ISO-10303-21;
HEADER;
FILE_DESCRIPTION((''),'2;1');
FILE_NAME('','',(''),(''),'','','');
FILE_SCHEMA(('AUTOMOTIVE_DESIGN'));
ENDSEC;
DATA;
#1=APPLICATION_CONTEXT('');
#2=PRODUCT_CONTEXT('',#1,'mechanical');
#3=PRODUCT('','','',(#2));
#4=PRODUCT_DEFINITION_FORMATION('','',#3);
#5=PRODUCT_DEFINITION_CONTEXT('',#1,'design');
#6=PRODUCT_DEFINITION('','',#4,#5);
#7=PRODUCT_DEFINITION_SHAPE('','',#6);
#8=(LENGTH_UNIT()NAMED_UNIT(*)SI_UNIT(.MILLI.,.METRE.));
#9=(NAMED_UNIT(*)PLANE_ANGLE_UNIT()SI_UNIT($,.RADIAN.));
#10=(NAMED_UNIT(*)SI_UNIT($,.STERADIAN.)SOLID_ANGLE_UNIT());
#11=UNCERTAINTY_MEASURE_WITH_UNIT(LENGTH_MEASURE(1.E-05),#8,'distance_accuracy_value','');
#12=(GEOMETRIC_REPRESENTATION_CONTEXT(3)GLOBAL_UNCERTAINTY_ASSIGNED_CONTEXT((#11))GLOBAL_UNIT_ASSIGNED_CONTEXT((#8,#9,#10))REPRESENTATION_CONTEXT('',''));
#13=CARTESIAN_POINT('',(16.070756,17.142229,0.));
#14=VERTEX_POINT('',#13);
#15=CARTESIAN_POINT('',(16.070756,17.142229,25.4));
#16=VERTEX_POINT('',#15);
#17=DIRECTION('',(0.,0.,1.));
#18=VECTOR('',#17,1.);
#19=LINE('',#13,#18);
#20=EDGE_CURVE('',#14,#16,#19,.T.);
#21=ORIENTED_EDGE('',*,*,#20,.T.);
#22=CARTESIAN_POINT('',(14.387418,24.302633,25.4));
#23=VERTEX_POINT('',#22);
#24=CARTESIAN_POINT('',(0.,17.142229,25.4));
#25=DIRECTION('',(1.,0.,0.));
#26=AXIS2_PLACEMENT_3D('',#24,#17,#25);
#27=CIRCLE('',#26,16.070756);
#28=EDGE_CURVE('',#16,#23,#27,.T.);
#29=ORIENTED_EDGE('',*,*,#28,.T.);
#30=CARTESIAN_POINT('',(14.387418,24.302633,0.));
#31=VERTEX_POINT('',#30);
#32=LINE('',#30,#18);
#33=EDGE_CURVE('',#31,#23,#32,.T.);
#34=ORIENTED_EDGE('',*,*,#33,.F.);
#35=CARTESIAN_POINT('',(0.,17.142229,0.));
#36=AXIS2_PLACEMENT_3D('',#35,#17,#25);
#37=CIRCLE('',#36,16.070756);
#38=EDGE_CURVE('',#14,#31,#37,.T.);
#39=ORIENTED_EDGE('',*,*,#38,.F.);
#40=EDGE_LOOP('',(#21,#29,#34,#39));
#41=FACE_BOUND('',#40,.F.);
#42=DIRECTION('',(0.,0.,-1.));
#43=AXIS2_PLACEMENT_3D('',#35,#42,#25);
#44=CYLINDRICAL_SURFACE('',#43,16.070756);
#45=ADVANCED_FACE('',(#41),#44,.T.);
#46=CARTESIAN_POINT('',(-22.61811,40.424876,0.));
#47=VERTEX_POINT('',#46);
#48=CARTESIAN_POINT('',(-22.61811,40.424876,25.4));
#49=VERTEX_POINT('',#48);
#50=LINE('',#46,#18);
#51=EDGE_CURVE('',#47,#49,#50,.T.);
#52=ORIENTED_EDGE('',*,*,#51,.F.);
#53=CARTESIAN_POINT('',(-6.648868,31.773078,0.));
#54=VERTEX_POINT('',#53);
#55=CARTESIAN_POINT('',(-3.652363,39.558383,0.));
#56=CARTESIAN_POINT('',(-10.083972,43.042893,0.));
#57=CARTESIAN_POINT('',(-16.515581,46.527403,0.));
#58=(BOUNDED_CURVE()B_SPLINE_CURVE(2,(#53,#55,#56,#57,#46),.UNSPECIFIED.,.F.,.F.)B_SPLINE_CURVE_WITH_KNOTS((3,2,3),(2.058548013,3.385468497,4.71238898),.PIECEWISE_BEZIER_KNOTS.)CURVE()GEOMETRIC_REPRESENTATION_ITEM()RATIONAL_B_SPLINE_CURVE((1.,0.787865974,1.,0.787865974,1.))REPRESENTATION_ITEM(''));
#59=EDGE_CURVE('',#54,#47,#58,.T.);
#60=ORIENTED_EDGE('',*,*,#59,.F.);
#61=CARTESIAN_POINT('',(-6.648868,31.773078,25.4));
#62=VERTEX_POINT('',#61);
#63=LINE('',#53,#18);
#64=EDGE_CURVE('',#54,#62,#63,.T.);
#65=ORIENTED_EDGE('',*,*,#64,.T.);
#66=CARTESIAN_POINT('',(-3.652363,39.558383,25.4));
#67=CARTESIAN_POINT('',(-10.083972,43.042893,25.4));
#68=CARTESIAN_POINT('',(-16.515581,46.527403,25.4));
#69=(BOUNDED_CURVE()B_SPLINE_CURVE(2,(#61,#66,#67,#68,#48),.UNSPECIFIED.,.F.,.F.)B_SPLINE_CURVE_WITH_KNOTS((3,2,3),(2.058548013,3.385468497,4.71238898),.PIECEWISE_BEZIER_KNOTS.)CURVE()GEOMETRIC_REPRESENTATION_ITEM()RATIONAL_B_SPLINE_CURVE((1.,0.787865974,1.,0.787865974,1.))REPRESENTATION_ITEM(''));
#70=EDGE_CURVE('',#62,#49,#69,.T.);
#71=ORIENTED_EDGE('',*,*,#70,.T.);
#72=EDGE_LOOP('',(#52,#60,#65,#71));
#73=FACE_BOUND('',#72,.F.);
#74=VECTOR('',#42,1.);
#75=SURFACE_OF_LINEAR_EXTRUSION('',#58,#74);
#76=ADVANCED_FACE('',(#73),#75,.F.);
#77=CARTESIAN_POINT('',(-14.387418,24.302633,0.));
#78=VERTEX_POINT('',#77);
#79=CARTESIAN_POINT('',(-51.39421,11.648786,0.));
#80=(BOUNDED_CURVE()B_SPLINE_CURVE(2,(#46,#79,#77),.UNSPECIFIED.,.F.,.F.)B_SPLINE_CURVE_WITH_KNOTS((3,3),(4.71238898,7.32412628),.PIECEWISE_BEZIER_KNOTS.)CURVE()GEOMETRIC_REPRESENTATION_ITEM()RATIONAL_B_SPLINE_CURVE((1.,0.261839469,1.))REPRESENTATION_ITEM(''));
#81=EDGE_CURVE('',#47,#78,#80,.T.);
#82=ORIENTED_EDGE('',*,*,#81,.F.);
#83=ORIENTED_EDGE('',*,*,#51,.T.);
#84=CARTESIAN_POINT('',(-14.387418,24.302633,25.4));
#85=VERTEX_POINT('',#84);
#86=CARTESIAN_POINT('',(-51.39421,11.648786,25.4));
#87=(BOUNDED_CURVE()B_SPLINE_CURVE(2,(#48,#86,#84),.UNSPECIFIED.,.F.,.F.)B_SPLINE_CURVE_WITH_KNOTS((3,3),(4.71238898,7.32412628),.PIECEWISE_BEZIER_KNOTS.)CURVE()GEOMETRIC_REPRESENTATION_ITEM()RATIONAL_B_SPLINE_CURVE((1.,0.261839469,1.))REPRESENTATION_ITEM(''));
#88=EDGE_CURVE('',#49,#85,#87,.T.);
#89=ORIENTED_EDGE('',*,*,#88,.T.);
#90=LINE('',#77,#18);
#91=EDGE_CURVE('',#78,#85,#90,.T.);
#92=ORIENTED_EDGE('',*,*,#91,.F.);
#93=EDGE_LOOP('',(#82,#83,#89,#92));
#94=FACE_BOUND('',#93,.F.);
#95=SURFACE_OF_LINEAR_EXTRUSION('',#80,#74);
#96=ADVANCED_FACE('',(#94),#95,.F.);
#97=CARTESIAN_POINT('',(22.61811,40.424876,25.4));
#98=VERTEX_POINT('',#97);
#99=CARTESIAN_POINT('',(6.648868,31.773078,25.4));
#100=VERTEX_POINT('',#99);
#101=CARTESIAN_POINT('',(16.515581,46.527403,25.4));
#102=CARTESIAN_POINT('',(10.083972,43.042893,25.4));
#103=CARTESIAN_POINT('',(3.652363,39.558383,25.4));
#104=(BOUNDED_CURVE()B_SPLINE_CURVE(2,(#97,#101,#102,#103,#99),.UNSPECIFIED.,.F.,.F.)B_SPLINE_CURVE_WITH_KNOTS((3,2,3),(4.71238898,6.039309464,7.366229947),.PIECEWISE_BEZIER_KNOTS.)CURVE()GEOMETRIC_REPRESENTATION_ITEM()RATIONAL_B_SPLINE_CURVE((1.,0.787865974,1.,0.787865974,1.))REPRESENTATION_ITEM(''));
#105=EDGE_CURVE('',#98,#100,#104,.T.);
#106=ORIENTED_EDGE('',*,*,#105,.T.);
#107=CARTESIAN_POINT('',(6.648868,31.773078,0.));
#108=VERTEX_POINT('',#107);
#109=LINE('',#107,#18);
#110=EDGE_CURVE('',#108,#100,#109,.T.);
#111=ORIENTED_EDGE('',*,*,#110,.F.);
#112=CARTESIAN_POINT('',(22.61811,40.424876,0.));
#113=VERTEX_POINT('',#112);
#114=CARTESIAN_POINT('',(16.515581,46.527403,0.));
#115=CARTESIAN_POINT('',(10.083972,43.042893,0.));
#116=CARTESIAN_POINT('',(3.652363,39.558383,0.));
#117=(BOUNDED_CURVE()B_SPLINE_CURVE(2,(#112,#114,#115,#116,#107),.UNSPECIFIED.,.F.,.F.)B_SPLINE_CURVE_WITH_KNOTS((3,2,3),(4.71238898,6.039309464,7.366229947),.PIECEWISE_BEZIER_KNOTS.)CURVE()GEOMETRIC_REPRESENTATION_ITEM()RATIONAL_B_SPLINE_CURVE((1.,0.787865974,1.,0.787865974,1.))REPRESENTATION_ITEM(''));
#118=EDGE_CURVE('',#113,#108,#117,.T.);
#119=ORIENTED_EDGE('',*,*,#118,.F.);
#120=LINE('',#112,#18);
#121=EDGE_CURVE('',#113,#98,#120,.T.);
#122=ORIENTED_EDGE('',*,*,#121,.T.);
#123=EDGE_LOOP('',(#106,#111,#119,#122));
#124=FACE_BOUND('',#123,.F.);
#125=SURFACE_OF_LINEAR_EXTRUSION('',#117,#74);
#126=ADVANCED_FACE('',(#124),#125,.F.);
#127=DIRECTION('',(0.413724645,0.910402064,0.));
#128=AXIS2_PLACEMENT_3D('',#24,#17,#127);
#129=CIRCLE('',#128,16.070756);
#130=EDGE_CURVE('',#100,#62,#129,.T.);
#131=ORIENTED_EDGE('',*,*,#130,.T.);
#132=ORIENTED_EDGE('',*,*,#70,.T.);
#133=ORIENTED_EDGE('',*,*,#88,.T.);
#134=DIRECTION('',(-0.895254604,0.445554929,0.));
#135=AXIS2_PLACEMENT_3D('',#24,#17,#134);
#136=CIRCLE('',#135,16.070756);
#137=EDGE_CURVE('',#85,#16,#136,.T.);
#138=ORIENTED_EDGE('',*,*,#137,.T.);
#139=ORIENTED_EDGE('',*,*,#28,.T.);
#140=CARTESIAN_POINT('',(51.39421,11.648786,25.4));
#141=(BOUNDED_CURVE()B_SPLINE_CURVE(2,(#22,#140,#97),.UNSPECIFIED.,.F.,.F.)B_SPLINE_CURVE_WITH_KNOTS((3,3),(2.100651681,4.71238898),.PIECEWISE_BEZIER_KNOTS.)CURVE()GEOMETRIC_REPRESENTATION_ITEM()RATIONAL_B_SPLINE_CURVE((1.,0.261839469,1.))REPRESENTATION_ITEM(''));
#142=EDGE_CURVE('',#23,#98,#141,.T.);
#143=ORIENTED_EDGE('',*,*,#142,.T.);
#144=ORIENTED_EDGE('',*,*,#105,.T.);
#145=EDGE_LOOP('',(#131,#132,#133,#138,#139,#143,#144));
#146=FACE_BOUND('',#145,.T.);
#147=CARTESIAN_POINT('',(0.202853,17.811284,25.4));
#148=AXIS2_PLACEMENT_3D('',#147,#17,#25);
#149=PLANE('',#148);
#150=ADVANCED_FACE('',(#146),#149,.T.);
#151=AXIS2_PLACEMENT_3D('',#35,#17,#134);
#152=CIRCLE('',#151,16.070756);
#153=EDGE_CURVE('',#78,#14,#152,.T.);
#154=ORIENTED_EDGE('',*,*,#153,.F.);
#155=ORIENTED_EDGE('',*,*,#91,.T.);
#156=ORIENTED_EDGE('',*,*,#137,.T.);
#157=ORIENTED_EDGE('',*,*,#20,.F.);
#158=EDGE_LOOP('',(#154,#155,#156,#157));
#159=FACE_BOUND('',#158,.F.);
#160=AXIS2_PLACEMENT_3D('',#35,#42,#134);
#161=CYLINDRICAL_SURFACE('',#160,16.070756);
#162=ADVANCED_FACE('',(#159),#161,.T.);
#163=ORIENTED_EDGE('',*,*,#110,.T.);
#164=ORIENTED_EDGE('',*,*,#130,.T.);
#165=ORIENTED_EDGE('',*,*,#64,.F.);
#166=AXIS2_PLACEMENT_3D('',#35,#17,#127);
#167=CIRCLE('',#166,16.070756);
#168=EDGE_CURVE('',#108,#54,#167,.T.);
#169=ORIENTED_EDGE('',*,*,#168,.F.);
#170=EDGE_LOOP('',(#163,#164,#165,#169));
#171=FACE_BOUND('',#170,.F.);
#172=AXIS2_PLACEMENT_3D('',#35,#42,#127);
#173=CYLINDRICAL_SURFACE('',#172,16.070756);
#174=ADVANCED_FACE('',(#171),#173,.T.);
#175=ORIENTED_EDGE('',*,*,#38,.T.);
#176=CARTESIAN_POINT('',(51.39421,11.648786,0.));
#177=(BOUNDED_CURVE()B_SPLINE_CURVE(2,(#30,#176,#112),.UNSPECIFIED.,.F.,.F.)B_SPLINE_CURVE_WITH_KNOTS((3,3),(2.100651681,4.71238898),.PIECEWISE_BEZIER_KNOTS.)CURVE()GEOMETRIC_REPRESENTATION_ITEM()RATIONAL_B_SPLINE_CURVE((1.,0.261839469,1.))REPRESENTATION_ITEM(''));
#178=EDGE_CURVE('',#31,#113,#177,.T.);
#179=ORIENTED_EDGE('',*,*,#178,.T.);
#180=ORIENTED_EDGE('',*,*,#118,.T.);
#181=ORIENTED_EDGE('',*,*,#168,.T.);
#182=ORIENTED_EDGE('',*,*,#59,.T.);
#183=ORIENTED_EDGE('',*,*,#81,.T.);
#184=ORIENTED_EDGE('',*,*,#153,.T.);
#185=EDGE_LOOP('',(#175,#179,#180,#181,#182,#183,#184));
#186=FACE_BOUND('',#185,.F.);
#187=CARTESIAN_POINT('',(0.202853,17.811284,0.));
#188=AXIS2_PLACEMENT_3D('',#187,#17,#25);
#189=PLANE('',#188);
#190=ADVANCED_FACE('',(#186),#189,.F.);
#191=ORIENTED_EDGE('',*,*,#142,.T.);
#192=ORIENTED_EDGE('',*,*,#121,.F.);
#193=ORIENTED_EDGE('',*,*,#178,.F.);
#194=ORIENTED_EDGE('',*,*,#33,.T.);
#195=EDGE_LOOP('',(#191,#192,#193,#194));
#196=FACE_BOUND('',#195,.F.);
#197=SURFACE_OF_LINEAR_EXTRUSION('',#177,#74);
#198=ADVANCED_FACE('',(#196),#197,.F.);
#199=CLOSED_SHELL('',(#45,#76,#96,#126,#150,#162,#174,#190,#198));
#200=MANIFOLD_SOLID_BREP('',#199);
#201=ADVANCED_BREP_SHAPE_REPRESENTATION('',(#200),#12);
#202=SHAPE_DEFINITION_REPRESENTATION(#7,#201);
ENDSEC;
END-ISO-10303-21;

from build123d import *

# Parameters (mm, degrees)
F1_DEPTH = 25.4


with BuildPart() as f1:
    # F0 (on Top) → F1 (new body)
    with BuildSketch(Plane.XY):
        with BuildLine():
            ThreePointArc((-14.3874178664, 24.3026331135), (-3.6778055907, 1.497966924), (16.0707555221, 17.1422287822))
            ThreePointArc((16.0707555221, 17.1422287822), (15.6442618582, 20.8200343728), (14.3874178664, 24.3026331135))
            add(Edge.make_bspline(
                [(6.6488676301, 31.7730777763), (8.7871476467, 26.2175508691), (14.3874178664, 24.3026331135)],
                knots=[1.0830446402, 1.0830446402, 1.0830446402, 2.100651681, 2.100651681, 2.100651681], degree=2, weights=[1, 0.8733279769, 1]))
            ThreePointArc((6.6488676301, 31.7730777763), (0, 33.2129843043), (-6.6488676301, 31.7730777763))
            add(Edge.make_bspline(
                [(-14.3874178664, 24.3026331135), (-8.7871476467, 26.2175508691), (-6.6488676301, 31.7730777763)],
                knots=[1.0409409725, 1.0409409725, 1.0409409725, 2.0585480134, 2.0585480134, 2.0585480134], degree=2, weights=[1, 0.8733279769, 1]))
        make_face()
        with BuildLine():
            add(Edge.make_bspline(
                [(6.6488676301, 31.7730777763), (8.7871476467, 26.2175508691), (14.3874178664, 24.3026331135)],
                knots=[1.0830446402, 1.0830446402, 1.0830446402, 2.100651681, 2.100651681, 2.100651681], degree=2, weights=[1, 0.8733279769, 1]))
            ThreePointArc((14.3874178664, 24.3026331135), (11.1616850313, 28.7044937122), (6.6488676301, 31.7730777763))
        make_face()
        with BuildLine():
            ThreePointArc((6.6488676301, 31.7730777763), (11.1616850313, 28.7044937122), (14.3874178664, 24.3026331135))
            add(Edge.make_bspline(
                [(14.3874178664, 24.3026331135), (51.3942103362, 11.6487858527), (22.6181104936, 40.4248756132)],
                knots=[2.100651681, 2.100651681, 2.100651681, 4.7123889804, 4.7123889804, 4.7123889804], degree=2, weights=[1, 0.2618394692, 1]))
            add(Edge.make_bspline(
                [(22.6181104936, 40.4248756132), (16.5155810704, 46.5274028982), (10.0839719096, 43.0428931628), (3.6523627487, 39.5583834273), (6.6488676301, 31.7730777763)],
                knots=[4.7123889804, 4.7123889804, 4.7123889804, 6.0393094639, 6.0393094639, 7.3662299474, 7.3662299474, 7.3662299474], degree=2, weights=[1, 0.7878659738, 1, 0.7878659738, 1]))
        make_face()
        with BuildLine():
            add(Edge.make_bspline(
                [(-22.6181104936, 40.4248756132), (-51.3942103362, 11.6487858527), (-14.3874178664, 24.3026331135)],
                knots=[4.7123889804, 4.7123889804, 4.7123889804, 7.3241262797, 7.3241262797, 7.3241262797], degree=2, weights=[1, 0.2618394692, 1]))
            ThreePointArc((-14.3874178664, 24.3026331135), (-11.1616850313, 28.7044937122), (-6.6488676301, 31.7730777763))
            add(Edge.make_bspline(
                [(-6.6488676301, 31.7730777763), (-3.6523627487, 39.5583834273), (-10.0839719096, 43.0428931628), (-16.5155810704, 46.5274028982), (-22.6181104936, 40.4248756132)],
                knots=[2.0585480134, 2.0585480134, 2.0585480134, 3.3854684969, 3.3854684969, 4.7123889804, 4.7123889804, 4.7123889804], degree=2, weights=[1, 0.7878659738, 1, 0.7878659738, 1]))
        make_face()
        with BuildLine():
            ThreePointArc((-6.6488676301, 31.7730777763), (-11.1616850313, 28.7044937122), (-14.3874178664, 24.3026331135))
            add(Edge.make_bspline(
                [(-14.3874178664, 24.3026331135), (-8.7871476467, 26.2175508691), (-6.6488676301, 31.7730777763)],
                knots=[1.0409409725, 1.0409409725, 1.0409409725, 2.0585480134, 2.0585480134, 2.0585480134], degree=2, weights=[1, 0.8733279769, 1]))
        make_face()
    extrude(amount=F1_DEPTH)


solid = f1.part
